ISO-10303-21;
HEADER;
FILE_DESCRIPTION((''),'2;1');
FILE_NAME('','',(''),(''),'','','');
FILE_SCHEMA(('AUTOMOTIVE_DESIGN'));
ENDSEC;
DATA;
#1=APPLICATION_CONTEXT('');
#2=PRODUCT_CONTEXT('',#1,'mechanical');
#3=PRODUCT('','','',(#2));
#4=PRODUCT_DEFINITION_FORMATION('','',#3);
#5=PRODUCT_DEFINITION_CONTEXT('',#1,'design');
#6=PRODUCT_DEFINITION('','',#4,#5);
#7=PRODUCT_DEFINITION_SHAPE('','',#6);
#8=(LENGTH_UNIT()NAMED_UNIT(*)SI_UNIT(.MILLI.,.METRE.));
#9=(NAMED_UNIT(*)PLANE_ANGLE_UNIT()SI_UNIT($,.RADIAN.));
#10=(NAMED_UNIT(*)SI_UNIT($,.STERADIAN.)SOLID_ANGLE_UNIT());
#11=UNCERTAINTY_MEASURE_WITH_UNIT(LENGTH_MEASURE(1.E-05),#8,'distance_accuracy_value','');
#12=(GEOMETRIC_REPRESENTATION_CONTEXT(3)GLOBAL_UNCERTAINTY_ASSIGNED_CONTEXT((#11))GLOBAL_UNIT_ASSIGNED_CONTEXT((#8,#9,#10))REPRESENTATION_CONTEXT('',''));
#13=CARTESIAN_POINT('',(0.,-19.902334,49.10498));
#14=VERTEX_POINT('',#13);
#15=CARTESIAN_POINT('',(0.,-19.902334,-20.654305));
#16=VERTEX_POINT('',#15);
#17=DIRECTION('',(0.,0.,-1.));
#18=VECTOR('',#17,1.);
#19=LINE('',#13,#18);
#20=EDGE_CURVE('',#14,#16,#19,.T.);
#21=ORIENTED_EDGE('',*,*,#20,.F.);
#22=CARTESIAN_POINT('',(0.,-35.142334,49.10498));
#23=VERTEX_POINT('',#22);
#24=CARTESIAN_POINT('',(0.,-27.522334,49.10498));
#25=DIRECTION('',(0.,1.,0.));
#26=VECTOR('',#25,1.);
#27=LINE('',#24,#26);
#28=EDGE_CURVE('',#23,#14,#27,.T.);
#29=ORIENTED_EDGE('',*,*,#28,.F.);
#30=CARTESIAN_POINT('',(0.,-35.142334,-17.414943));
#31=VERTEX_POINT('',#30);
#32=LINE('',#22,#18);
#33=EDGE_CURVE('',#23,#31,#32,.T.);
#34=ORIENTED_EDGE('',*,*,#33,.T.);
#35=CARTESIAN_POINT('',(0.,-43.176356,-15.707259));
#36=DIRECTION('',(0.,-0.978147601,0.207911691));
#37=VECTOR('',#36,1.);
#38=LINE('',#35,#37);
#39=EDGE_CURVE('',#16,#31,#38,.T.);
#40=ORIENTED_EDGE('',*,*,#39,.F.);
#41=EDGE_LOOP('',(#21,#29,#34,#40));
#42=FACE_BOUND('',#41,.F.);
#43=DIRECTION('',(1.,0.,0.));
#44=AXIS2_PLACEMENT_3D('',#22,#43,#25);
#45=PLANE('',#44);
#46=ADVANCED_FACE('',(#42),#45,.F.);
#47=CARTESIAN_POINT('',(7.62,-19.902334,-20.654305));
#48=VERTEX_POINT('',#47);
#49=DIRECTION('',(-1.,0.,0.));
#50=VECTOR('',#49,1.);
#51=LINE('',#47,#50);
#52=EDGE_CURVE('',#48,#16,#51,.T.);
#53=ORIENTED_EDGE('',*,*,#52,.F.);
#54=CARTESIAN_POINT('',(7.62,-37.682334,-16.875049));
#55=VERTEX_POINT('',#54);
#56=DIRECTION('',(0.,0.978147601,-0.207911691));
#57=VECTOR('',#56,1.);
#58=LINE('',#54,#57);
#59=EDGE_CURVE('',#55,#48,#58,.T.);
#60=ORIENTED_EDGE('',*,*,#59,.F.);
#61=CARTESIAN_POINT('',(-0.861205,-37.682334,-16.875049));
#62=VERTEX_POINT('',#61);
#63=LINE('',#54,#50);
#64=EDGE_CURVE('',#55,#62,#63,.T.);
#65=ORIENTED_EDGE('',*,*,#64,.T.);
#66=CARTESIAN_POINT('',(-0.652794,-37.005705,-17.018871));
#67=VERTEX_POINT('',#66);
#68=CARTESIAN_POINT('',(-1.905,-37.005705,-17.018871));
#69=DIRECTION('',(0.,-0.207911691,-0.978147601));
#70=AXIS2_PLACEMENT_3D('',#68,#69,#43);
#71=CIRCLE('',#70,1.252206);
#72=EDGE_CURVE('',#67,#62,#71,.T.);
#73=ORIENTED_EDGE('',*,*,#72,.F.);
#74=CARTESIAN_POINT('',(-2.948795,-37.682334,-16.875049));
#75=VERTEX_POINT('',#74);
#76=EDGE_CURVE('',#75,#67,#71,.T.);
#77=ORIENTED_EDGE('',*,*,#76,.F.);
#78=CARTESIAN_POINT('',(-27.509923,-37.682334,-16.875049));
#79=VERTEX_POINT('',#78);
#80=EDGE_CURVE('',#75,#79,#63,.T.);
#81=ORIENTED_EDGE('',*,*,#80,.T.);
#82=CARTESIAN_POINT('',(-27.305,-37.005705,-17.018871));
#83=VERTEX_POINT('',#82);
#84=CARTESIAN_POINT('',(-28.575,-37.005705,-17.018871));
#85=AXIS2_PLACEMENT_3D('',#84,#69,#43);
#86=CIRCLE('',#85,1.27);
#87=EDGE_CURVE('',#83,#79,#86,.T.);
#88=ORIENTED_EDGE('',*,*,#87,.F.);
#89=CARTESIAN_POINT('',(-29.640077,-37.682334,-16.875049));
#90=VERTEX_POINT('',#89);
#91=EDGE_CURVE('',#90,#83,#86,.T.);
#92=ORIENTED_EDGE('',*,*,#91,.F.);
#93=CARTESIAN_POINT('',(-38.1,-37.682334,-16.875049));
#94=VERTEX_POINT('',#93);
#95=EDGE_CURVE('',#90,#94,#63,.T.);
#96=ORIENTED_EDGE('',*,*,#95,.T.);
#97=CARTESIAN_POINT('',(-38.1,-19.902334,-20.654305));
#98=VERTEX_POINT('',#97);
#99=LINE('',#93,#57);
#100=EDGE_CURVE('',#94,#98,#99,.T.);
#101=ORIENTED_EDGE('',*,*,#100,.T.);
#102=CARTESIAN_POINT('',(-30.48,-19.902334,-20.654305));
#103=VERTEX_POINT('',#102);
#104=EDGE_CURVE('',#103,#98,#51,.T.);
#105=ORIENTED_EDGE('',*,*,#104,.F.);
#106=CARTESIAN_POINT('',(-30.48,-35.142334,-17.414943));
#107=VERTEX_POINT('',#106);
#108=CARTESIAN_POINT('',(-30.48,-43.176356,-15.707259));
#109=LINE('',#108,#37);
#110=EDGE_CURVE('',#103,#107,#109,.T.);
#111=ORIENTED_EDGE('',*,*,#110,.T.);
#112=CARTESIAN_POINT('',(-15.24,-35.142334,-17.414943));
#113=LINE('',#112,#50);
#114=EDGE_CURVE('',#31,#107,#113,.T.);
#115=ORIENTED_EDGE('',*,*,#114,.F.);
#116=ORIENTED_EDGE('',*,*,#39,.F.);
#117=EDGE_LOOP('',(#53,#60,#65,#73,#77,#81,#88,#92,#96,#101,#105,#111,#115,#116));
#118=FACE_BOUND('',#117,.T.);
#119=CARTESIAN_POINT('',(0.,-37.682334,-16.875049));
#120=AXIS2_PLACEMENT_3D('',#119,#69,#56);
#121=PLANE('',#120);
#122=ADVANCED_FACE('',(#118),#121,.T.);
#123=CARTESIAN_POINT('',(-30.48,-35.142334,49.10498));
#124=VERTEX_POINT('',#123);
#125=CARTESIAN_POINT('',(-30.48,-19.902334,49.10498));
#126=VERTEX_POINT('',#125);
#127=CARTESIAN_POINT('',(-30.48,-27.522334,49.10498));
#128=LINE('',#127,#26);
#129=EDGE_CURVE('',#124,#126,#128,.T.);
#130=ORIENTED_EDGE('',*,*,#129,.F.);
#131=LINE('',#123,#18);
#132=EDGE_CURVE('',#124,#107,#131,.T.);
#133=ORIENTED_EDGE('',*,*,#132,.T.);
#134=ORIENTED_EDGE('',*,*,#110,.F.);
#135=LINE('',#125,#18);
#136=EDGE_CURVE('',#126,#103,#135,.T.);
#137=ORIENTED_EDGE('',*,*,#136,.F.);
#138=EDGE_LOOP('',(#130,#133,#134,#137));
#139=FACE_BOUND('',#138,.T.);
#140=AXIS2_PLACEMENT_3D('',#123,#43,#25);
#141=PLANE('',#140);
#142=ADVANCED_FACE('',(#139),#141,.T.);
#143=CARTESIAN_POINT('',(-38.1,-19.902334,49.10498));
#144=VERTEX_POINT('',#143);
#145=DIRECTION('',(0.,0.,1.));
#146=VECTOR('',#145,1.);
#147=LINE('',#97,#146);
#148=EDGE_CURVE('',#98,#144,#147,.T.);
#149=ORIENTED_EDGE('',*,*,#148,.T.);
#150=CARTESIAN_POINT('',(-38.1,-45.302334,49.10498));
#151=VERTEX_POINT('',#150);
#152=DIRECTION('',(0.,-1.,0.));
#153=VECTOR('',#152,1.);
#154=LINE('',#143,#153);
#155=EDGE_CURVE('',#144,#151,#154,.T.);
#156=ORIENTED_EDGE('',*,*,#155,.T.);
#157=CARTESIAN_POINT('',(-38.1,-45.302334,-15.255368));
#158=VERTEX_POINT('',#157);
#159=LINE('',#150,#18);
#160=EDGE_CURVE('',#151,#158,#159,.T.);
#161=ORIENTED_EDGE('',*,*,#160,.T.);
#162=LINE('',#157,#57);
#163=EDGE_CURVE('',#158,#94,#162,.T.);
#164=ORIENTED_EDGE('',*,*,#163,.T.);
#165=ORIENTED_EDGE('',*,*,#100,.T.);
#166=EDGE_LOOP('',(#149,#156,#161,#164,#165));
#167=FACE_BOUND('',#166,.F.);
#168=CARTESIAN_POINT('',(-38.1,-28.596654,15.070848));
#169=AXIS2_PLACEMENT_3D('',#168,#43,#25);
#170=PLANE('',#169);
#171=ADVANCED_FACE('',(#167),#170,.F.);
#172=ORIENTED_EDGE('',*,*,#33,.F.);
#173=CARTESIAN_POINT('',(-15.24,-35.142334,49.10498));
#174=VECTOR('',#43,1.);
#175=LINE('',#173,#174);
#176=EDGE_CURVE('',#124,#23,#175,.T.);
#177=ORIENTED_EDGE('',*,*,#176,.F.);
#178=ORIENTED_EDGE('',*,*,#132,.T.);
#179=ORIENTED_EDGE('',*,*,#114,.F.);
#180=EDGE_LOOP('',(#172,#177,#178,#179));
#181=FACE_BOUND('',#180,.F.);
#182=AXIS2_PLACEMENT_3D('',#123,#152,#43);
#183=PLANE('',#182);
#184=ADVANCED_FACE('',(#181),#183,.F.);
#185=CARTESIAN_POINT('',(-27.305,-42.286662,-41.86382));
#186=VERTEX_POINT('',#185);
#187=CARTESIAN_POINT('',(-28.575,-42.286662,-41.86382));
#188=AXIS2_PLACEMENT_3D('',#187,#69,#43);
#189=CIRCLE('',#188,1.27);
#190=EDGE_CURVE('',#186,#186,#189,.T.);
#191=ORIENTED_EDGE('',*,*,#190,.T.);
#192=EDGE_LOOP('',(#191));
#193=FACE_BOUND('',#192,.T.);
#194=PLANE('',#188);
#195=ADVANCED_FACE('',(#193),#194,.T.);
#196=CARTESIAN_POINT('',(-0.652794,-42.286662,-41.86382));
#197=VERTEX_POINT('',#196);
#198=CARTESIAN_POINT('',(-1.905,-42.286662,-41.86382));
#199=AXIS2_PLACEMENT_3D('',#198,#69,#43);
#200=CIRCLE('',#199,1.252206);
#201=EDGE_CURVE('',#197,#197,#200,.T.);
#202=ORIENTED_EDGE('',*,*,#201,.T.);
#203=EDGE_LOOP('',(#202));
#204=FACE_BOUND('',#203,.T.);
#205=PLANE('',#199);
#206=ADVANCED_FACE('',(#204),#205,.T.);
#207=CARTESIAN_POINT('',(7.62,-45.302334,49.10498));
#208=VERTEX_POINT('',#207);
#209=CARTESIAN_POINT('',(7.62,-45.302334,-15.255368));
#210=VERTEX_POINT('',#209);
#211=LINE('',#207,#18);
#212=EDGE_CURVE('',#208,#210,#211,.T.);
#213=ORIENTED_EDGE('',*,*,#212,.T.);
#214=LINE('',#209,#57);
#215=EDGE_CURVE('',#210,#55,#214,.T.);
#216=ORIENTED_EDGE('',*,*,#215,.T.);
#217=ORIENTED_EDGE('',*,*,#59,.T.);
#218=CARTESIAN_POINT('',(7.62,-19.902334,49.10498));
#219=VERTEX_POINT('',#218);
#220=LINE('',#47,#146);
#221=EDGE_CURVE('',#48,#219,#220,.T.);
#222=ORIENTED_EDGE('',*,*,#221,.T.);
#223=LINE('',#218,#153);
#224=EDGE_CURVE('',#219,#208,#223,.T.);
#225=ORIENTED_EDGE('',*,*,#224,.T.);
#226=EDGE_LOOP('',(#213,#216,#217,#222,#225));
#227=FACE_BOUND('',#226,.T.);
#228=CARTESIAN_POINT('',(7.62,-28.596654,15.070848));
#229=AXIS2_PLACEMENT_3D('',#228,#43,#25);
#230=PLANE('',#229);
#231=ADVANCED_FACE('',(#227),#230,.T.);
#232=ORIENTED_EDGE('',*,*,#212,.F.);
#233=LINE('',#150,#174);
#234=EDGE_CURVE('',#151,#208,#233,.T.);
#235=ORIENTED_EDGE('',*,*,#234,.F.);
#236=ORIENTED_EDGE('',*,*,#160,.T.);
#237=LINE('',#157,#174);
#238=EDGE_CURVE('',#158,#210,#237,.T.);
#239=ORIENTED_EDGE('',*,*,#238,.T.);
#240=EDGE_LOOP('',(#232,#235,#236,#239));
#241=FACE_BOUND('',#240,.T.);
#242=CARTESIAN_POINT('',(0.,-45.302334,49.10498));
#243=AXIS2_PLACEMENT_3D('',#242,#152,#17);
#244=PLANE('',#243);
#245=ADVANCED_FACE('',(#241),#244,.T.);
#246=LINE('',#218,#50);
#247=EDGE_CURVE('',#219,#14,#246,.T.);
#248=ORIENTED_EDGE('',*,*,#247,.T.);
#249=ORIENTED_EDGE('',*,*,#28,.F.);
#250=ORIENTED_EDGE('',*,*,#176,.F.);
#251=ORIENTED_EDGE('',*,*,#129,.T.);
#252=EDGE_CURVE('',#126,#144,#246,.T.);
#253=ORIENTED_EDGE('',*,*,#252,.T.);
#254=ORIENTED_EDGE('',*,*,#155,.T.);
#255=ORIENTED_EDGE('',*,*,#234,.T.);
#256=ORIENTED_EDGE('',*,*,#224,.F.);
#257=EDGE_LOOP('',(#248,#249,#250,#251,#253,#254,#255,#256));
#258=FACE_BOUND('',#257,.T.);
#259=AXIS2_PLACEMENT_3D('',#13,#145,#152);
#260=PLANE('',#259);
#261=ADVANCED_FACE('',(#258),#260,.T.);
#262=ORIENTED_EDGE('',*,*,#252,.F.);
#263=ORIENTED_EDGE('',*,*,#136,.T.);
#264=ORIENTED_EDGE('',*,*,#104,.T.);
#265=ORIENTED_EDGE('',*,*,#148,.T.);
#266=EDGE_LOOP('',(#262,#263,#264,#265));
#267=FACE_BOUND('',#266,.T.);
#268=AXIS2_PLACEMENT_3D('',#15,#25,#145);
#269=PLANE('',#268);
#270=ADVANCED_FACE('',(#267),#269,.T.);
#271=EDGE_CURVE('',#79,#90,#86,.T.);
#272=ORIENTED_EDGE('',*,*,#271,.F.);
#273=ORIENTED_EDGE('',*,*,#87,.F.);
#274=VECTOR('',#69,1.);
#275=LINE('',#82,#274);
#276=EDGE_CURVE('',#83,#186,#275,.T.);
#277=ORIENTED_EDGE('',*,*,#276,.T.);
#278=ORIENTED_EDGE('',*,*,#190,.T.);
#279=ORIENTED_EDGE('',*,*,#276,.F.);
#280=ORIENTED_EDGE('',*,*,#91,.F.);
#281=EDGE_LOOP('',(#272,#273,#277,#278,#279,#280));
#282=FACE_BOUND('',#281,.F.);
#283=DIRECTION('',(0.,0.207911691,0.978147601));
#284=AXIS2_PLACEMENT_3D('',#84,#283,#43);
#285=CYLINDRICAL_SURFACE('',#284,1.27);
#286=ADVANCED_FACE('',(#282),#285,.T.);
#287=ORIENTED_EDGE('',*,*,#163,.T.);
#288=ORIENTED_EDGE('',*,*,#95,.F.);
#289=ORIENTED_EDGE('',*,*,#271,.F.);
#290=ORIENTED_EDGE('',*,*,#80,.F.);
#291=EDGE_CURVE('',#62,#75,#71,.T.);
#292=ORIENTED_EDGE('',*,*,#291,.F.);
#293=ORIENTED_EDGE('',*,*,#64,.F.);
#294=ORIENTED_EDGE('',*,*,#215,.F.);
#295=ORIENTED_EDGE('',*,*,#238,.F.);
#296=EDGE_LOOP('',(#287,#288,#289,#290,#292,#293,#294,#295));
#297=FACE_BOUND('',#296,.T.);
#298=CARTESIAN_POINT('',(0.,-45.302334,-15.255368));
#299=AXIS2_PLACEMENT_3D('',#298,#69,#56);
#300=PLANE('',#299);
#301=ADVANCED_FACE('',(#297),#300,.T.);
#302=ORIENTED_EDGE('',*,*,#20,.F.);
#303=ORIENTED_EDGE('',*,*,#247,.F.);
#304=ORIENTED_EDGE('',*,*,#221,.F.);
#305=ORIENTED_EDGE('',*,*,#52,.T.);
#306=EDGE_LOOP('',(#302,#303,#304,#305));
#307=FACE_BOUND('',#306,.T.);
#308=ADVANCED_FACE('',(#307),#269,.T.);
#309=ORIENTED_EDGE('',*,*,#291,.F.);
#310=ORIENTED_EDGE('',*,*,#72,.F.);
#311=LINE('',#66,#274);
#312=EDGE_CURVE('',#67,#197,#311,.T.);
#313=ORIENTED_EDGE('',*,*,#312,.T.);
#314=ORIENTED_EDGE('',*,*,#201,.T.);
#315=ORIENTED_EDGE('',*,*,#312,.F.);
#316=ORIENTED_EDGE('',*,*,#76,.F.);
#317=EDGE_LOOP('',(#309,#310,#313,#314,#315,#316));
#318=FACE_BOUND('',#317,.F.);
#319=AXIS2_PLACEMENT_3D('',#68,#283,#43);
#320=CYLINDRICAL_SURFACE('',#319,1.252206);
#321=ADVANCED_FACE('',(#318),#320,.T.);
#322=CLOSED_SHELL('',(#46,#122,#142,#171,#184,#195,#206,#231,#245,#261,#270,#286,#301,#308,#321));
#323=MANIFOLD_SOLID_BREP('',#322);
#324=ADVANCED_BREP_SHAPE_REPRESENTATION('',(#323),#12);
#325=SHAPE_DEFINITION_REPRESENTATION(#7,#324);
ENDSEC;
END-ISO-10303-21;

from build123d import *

# Parameters (mm, degrees)
F1_DEPTH      = 7.62
F1_DEPTH_BACK = 38.1
F2_DEPTH      = 15.24
F3_W          = 30.48
F3_H          = 15.24
F4_DEPTH      = 152.4
F5_R          = 1.27
F5_R_2        = 1.2522055882
F6_DEPTH      = 25.4


# Not quite as in the source:
# - a feature names something its author has since deleted; it is built from what else it names


with BuildPart() as f1:
    # F0 (on Right) → F1 (new body, two sides)
    with BuildSketch(Plane.YZ) as f1_sk:
        Polygon((-19.9023338153, 49.1049804437), (-37.6823338153, 49.1049804437), (-37.6823338153, -16.8750494665), (-19.9023338153, -20.654305133), align=None)
        Polygon((-37.6823338153, 49.1049804437), (-45.3023338153, 49.1049804437), (-45.3023338153, -15.2553684666), (-37.6823338153, -16.8750494665), align=None)
    extrude(amount=F1_DEPTH)
    extrude(f1_sk.sketch, amount=-F1_DEPTH_BACK)

    # F0 (on Right) → F2 (join)
    with BuildSketch(Plane.YZ):
        Polygon((-37.6823338153, 49.1049804437), (-45.3023338153, 49.1049804437), (-45.3023338153, -15.2553684666), (-37.6823338153, -16.8750494665), align=None)
    extrude(amount=-F2_DEPTH)

    # F3 (on face) → F4 (cut)
    with BuildSketch(Plane.XY.offset(49.1049804437)):
        with Locations((-15.24, -27.5223338153)):
            Rectangle(F3_W, F3_H)
    extrude(amount=-F4_DEPTH, mode=Mode.SUBTRACT)

    # F5 (on face) → F6 (join)
    with BuildSketch(Plane(origin=(0, -5.0607549484, -23.8089801067), x_dir=(1, 0, 0), z_dir=(0, -0.2079116908, -0.9781476007))):
        with Locations((-28.575, 32.6586192333)):
            Circle(F5_R)
        with Locations((-1.905, 32.6586192333)):
            Circle(F5_R_2)
    extrude(amount=F6_DEPTH)


solid = f1.part
